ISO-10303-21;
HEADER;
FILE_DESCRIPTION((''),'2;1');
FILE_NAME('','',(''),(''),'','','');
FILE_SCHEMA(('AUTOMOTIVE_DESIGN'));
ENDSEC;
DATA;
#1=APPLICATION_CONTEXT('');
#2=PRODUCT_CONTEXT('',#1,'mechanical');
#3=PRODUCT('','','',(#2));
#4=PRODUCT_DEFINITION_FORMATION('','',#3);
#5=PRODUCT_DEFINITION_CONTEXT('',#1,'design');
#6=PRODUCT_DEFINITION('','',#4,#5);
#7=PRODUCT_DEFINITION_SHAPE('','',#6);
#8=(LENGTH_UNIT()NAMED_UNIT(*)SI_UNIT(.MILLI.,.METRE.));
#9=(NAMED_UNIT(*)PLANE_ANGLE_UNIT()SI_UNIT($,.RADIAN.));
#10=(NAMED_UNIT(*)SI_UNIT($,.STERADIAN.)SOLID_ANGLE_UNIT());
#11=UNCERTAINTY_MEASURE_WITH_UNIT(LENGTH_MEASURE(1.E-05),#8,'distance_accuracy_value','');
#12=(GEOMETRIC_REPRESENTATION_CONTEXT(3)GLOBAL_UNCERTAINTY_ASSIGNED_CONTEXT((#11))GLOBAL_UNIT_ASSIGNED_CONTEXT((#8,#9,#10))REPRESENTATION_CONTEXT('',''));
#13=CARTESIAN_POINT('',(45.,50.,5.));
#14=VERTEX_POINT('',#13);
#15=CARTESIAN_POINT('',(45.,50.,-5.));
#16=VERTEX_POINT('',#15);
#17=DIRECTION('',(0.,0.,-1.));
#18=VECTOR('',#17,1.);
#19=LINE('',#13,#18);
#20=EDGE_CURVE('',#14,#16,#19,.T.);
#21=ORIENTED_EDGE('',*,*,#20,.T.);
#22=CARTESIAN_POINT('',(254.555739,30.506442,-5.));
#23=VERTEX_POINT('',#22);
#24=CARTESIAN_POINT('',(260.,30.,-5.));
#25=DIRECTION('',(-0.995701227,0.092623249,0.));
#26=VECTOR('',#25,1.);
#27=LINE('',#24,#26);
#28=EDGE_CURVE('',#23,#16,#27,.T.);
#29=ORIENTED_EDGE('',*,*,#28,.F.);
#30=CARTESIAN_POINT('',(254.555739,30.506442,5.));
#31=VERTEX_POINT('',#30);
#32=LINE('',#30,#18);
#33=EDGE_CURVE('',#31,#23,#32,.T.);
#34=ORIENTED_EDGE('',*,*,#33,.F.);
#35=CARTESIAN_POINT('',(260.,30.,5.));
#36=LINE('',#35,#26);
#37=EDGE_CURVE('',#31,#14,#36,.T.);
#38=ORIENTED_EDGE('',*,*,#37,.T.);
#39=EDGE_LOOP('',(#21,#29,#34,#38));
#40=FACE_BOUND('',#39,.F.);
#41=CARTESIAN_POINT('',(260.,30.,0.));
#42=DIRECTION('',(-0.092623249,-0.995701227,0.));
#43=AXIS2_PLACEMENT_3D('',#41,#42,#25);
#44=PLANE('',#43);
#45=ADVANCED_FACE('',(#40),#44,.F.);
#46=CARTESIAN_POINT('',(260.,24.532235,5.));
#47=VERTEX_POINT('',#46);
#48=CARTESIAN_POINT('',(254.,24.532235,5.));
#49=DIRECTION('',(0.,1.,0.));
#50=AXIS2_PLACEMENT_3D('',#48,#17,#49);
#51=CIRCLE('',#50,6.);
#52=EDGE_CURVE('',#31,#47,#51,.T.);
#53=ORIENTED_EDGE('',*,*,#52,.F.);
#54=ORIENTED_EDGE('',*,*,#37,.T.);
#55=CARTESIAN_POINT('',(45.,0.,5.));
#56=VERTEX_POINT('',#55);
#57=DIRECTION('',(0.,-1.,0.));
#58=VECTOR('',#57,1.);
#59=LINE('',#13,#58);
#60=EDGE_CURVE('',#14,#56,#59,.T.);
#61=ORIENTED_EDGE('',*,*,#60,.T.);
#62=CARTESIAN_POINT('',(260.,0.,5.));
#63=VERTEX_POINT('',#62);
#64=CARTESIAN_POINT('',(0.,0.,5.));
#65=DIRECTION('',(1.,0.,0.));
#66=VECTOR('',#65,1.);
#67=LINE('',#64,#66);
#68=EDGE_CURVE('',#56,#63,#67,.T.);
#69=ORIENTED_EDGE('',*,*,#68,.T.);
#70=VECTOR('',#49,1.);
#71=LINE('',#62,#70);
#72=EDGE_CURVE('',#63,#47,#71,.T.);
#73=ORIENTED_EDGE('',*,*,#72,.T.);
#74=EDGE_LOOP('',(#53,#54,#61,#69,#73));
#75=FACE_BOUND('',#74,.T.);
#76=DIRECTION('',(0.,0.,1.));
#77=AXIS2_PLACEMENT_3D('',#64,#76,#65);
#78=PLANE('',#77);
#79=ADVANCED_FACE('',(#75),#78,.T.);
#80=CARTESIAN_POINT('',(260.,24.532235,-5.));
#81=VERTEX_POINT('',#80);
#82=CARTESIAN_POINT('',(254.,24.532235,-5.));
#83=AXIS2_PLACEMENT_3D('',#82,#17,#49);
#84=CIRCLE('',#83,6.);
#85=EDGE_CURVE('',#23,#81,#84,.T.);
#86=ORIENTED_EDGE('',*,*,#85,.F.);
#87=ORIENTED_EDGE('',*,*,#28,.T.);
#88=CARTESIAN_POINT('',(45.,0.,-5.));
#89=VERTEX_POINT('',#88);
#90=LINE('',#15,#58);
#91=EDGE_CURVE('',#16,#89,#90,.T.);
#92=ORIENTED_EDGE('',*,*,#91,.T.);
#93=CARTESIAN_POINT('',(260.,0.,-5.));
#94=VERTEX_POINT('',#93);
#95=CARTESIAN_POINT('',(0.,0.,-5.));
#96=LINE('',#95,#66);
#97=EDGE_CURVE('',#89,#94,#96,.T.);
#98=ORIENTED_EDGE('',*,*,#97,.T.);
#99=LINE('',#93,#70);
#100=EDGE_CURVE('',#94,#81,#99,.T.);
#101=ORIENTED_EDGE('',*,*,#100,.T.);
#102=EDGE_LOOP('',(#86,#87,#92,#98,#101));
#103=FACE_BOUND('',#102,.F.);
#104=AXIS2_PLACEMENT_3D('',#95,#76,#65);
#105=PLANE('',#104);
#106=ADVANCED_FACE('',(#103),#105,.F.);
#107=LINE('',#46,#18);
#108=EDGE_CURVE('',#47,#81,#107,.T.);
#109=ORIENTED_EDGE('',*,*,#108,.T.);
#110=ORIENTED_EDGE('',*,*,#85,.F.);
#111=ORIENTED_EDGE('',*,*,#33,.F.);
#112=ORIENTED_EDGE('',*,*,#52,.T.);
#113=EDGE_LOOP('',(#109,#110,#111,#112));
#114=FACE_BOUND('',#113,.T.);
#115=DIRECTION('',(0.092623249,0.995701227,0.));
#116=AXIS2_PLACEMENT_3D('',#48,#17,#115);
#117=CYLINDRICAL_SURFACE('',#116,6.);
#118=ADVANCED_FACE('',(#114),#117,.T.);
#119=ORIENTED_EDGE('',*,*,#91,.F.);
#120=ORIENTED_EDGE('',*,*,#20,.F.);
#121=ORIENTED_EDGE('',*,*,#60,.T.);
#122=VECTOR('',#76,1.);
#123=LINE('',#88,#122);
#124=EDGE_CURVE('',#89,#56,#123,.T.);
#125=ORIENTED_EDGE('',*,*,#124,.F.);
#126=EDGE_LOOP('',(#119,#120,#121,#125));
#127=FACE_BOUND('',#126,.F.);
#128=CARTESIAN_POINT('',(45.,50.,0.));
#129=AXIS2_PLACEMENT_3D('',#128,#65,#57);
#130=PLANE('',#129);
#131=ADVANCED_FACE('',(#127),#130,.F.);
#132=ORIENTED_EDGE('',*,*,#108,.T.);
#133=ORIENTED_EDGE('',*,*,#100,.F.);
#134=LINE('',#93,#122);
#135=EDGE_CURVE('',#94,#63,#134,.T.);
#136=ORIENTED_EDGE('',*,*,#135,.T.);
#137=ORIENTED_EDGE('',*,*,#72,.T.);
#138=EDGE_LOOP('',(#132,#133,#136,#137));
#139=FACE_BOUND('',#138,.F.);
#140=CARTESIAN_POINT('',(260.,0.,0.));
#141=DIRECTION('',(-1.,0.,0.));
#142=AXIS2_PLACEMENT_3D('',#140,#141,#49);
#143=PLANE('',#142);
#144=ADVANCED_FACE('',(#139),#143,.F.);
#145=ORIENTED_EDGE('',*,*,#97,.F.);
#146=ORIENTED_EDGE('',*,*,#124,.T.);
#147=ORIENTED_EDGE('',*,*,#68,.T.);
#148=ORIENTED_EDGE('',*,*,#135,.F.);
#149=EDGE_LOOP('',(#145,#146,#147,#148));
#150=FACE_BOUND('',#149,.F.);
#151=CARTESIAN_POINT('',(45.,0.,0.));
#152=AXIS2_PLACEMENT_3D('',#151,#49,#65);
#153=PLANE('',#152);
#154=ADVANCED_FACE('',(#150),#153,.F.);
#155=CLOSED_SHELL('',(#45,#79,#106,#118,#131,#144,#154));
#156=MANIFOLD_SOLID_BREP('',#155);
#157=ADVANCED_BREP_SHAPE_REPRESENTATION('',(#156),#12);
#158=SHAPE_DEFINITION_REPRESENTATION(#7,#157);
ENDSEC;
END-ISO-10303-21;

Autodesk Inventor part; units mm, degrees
ref_plane "YZ Plane" through (0, 0, 0) normal (1, 0, 0) x (0, 1, 0)
ref_plane "XZ Plane" through (0, 0, 0) normal (0, 1, 0) x (-1, 0, 0)
ref_plane "XY Plane" through (0, 0, 0) normal (0, 0, 1) x (1, 0, 0)
sketch "Sketch3" plane through (0, 0, 0) normal (0, 0, 1) x (1, 0, 0)
  line L0 (0, 0) -> (260, 0)
  line L1 (260, 0) -> (260, 30)
  line L2 (260, 30) -> (-45.1628, 58.3872)
  line L3 (45, 50) -> (45, 0)
  dimension "d11" = 260
  dimension "d12" = 30
  dimension "d13" = 45
  dimension "d14" = 50
extrude "Plate1" add sketch "Sketch3" along normal mid plane 10
fillet "Corner Round1" radius 6 1 edges at (260, 30, 0)
equation "\"d15\" = Thickness"
equation "\"BendReliefDepth\" = 0.5 * Thickness"
equation "\"Thickness\" = 10"
properties part number "PRS 940-23 charging hatch reinf 500mm" material "Steel"
